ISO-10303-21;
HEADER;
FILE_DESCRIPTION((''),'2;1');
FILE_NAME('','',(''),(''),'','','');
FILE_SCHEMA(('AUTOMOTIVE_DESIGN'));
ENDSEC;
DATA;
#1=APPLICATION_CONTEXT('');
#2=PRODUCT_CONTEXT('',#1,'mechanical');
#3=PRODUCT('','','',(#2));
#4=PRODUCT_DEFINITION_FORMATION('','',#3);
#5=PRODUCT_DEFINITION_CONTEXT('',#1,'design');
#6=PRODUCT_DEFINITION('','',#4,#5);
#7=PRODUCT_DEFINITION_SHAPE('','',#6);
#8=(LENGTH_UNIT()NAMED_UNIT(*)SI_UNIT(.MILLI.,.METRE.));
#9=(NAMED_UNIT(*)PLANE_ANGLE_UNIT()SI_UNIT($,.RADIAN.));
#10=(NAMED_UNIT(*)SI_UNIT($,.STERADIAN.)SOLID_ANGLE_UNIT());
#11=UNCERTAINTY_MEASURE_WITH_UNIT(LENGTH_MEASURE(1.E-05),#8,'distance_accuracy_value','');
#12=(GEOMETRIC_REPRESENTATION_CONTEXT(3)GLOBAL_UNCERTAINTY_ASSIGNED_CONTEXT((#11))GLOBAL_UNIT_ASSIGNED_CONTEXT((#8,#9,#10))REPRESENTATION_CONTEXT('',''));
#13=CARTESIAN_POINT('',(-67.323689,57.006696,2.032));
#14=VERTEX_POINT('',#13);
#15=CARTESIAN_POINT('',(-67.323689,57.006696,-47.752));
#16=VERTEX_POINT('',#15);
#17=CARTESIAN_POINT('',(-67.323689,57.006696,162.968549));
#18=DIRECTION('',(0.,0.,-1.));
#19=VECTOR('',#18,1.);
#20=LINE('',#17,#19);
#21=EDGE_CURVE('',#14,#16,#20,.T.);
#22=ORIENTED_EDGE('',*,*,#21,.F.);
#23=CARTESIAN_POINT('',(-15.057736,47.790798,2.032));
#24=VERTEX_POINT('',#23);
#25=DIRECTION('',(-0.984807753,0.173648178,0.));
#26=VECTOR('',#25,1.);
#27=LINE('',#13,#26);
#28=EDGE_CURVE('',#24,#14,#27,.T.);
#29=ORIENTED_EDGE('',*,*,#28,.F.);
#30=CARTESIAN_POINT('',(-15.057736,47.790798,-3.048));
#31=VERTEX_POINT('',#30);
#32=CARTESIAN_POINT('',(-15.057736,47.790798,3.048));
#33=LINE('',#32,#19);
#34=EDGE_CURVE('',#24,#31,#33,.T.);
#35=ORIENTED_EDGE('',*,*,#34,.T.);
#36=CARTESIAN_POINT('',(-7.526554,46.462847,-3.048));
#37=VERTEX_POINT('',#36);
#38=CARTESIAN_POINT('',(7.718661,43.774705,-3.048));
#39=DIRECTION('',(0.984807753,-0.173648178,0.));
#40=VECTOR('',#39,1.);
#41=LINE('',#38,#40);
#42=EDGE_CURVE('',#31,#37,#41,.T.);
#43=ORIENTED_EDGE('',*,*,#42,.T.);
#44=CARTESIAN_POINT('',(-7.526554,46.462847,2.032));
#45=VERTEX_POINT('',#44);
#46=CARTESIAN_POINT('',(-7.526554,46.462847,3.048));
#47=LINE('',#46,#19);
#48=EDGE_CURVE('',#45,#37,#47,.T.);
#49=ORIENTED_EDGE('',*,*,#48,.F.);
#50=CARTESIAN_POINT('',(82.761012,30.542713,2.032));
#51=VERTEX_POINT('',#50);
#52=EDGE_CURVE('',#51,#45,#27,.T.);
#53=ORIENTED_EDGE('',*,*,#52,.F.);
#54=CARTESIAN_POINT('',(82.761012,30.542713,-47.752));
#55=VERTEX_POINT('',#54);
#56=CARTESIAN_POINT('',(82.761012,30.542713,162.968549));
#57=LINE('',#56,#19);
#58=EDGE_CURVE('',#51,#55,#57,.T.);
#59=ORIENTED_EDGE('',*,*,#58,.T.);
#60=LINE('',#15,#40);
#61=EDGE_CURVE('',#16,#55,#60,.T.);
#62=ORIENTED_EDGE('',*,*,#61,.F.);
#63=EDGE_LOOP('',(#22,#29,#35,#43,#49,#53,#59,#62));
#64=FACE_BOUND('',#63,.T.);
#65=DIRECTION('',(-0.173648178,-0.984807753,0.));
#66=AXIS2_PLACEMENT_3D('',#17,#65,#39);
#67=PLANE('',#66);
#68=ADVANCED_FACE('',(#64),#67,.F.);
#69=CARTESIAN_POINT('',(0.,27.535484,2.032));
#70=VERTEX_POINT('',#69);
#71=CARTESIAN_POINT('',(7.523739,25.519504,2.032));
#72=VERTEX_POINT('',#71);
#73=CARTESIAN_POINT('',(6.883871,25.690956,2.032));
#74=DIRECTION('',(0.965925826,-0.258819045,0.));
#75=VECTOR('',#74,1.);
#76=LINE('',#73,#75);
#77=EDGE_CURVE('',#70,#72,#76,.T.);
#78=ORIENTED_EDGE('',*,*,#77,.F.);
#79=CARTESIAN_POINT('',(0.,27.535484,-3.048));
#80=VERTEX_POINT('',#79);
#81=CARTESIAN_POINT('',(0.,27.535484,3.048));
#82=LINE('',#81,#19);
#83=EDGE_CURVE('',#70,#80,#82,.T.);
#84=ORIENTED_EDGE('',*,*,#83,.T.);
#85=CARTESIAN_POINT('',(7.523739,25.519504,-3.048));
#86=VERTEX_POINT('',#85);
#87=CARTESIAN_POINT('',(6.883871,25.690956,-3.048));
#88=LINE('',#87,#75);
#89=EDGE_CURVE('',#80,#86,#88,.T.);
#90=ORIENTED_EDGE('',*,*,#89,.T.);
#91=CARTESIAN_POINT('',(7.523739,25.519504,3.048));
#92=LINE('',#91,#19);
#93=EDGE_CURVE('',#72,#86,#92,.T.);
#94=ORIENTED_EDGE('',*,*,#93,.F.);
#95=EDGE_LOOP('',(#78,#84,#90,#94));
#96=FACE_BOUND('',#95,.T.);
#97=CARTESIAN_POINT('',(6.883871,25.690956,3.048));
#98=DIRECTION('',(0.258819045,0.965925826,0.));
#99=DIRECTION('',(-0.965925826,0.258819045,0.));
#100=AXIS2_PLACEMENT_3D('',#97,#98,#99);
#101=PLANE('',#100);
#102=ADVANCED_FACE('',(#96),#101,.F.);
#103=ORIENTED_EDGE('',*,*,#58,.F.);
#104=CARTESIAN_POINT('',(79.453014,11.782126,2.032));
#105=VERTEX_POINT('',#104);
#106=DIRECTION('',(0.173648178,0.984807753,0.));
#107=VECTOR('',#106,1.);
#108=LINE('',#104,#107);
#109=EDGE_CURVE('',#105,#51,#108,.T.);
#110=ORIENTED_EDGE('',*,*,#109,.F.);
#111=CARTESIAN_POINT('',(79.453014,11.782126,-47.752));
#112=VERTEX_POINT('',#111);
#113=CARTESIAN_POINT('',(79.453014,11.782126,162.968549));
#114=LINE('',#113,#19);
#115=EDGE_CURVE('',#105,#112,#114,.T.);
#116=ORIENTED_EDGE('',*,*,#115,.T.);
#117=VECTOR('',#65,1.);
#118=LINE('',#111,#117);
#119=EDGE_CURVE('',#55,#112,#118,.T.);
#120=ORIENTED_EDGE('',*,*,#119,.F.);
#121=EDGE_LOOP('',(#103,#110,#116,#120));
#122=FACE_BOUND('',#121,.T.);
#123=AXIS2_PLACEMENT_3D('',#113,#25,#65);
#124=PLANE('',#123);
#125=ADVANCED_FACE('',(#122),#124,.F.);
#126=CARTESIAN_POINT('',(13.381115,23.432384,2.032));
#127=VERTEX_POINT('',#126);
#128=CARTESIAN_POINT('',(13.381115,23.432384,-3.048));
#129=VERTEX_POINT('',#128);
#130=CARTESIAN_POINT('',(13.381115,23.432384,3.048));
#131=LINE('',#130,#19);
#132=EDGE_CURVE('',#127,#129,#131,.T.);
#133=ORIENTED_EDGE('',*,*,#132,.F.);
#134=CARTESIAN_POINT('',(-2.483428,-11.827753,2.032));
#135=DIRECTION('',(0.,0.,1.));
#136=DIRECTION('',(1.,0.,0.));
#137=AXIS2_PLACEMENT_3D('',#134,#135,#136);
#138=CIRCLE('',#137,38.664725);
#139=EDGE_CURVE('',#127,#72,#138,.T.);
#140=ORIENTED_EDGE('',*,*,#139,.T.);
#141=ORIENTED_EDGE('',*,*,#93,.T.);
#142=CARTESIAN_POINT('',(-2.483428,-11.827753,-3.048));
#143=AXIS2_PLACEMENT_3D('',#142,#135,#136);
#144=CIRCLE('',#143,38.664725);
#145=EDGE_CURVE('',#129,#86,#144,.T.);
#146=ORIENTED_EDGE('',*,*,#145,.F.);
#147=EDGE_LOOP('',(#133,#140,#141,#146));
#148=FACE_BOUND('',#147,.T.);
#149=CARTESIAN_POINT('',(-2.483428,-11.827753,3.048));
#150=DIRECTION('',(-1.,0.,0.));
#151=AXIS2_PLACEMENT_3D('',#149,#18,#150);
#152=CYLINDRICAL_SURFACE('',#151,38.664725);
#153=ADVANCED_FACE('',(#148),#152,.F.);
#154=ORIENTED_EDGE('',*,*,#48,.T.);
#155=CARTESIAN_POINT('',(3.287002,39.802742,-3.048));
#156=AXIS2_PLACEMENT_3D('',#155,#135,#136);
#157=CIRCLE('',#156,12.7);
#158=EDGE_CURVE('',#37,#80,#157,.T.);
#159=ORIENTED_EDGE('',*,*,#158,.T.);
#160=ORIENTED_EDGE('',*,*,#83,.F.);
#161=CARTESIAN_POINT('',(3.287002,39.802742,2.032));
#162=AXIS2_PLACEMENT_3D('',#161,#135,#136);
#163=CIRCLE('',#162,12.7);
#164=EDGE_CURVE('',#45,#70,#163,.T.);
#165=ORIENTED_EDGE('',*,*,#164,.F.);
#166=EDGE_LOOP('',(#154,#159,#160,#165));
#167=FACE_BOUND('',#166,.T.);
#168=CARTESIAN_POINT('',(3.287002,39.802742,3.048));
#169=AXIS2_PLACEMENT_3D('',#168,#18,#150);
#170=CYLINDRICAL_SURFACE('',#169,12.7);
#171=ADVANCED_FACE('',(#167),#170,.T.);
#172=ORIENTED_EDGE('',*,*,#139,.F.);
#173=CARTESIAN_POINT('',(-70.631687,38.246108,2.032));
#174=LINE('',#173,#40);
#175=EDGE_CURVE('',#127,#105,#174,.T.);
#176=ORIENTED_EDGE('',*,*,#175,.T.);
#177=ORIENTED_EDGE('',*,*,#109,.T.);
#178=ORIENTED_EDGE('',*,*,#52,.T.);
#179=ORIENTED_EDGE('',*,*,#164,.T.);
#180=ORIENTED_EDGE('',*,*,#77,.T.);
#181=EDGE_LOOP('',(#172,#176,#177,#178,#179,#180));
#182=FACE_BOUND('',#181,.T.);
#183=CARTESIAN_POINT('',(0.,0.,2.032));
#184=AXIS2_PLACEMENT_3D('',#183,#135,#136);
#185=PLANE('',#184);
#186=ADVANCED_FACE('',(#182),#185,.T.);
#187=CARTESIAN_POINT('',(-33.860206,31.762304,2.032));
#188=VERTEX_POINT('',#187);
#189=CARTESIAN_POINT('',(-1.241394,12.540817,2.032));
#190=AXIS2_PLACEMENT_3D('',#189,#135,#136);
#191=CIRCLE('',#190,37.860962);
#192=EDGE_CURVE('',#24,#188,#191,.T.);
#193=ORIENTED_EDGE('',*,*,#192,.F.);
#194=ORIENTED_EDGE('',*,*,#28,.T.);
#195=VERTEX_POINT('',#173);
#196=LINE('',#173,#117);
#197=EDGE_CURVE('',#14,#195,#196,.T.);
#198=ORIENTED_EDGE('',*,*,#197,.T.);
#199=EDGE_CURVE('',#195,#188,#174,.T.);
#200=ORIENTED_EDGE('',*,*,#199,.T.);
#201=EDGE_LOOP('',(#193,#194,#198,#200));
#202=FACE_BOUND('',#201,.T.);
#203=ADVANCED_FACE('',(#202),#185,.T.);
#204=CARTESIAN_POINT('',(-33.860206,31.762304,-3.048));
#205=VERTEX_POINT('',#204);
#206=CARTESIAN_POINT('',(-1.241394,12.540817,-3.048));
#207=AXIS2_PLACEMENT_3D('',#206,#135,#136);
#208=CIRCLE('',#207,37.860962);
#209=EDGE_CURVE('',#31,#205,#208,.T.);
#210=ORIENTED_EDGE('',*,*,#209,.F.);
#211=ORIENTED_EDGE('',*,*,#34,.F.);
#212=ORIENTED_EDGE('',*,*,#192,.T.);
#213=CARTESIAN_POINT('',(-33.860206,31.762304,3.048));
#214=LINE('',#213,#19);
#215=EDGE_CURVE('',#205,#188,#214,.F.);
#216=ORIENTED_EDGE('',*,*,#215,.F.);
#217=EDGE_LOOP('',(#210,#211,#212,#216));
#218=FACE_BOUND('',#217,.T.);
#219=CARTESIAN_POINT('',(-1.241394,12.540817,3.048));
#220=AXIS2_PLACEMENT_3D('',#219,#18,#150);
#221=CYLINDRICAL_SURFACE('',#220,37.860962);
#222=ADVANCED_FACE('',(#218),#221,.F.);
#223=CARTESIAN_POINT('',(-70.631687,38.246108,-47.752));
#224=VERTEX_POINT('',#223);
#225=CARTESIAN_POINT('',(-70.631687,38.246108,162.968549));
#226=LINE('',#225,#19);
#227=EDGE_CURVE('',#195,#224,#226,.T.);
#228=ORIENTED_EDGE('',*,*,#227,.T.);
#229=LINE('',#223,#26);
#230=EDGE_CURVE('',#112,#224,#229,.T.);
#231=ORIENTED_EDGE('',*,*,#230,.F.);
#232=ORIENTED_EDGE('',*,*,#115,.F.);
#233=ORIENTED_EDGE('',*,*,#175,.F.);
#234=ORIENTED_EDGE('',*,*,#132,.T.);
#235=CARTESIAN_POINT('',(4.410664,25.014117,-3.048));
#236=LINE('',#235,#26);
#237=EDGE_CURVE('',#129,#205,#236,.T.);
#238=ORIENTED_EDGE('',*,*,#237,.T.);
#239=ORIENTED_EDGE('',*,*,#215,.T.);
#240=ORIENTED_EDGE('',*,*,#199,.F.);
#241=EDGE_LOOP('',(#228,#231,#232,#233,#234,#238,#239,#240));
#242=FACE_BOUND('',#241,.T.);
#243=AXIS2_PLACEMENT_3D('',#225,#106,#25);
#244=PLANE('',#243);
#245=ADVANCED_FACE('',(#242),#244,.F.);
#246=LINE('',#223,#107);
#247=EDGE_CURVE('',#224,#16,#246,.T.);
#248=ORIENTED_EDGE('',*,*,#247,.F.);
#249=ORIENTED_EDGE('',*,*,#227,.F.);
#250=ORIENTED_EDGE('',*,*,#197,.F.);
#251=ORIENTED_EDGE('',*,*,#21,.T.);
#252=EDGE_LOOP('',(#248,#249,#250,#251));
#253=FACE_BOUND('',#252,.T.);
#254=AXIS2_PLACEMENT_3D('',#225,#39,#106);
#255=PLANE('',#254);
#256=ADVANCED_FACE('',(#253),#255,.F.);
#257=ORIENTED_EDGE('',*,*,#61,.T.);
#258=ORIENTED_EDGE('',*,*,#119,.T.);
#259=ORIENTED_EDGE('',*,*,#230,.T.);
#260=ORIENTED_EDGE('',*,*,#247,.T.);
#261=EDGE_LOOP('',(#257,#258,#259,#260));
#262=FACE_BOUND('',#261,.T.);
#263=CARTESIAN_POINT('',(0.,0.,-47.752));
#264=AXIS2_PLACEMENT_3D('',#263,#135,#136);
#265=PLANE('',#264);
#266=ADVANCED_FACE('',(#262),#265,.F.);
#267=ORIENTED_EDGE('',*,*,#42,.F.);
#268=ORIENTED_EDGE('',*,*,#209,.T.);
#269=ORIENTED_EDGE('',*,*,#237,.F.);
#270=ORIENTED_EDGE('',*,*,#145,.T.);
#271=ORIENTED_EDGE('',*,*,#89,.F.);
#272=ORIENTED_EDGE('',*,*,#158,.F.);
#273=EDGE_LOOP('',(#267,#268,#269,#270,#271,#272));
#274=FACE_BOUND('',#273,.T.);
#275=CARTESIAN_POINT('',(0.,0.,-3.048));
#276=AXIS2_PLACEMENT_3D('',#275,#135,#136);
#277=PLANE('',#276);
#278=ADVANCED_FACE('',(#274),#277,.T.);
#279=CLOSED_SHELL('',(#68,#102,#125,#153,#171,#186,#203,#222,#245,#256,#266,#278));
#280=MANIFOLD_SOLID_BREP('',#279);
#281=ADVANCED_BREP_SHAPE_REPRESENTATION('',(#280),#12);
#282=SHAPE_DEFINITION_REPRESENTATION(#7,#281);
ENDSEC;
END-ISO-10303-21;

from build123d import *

# Parameters (mm, degrees)
BOSS_EXTRUDE1_DEPTH        = 3.048
BOSS_EXTRUDE2_DEPTH        = 2.032
BOSS_EXTRUDE2_DEPTH_BACK   = 47.752
BOSS_EXTRUDE2_2_DEPTH      = 2.032
BOSS_EXTRUDE2_2_DEPTH_BACK = 47.752


with BuildPart() as part:
    # Sketch1 → Boss-Extrude1 (new, symmetric)
    with BuildSketch(Plane.XY):
        with BuildLine():
            ThreePointArc((0, 27.535484012), (-9.412998127, 39.802742006), (0, 52.07))
            Line((0, 52.07), (-11.040532194, 49.111698314))
            ThreePointArc((-11.040532194, 49.111698314), (-39.066320922, 14.192289272), (-14.190605813, -23.03684931))
            Line((-14.190605813, -23.03684931), (0, -28.201807432))
            ThreePointArc((0, -28.201807432), (8.35634418, -40.135903716), (0, -52.07))
            Line((0, -52.07), (10.740686656, -48.160709762))
            ThreePointArc((10.740686656, -48.160709762), (36.144496882, -10.141220984), (7.52373904, 25.519504212))
            Line((7.52373904, 25.519504212), (0, 27.535484012))
        make_face()
        with BuildLine():
            Line((-12.7, 7.332348419), (-1.374815329, 13.870946837))
            ThreePointArc((-1.374815329, 13.870946837), (-0.410875234, 16.198104087), (1.5875, 14.664696837))
            ThreePointArc((1.5875, 14.664696837), (1.533407249, 14.253821603), (1.374815329, 13.870946837))
            Line((1.374815329, 13.870946837), (12.7, 7.332348419))
            Line((12.7, 7.332348419), (12.7, -7.332348419))
            Line((12.7, -7.332348419), (0, -14.664696837))
            Line((0, -14.664696837), (-12.7, -7.332348419))
            Line((-12.7, -7.332348419), (-12.7, 7.332348419))
        make_face(mode=Mode.SUBTRACT)
    extrude(amount=BOSS_EXTRUDE1_DEPTH, both=True)


with BuildPart() as body_2:
    # Sketch2 → Boss-Extrude2 (new, two sides: drawn at the far end of the back side and taken through both)
    with BuildSketch(Plane.XY.offset(-BOSS_EXTRUDE2_DEPTH_BACK)):
        Polygon((-70.631687067, 38.246108065), (79.453014492, 11.782125788), (82.761012277, 30.542713483), (-67.323689282, 57.00669576), align=None)
    extrude(amount=BOSS_EXTRUDE2_DEPTH + BOSS_EXTRUDE2_DEPTH_BACK)


with BuildPart() as body_3:
    # Sketch2 → Boss-Extrude2 2 (new, two sides: drawn at the far end of the back side and taken through both)
    with BuildSketch(Plane.XY.offset(-BOSS_EXTRUDE2_2_DEPTH_BACK)):
        Polygon((-79.453014492, -11.782125788), (70.631687067, -38.246108065), (67.323689282, -57.00669576), (-82.761012277, -30.542713483), align=None)
    extrude(amount=BOSS_EXTRUDE2_2_DEPTH + BOSS_EXTRUDE2_2_DEPTH_BACK)


with BuildPart() as body_2_1:
    add(body_2.part)

    # Intersect1: read off the stored shape, not the designer's step
    # Intersect1: cut body 3, part
    add(body_3.part, mode=Mode.SUBTRACT)
    add(part.part, mode=Mode.SUBTRACT)


solid = body_2_1.part
